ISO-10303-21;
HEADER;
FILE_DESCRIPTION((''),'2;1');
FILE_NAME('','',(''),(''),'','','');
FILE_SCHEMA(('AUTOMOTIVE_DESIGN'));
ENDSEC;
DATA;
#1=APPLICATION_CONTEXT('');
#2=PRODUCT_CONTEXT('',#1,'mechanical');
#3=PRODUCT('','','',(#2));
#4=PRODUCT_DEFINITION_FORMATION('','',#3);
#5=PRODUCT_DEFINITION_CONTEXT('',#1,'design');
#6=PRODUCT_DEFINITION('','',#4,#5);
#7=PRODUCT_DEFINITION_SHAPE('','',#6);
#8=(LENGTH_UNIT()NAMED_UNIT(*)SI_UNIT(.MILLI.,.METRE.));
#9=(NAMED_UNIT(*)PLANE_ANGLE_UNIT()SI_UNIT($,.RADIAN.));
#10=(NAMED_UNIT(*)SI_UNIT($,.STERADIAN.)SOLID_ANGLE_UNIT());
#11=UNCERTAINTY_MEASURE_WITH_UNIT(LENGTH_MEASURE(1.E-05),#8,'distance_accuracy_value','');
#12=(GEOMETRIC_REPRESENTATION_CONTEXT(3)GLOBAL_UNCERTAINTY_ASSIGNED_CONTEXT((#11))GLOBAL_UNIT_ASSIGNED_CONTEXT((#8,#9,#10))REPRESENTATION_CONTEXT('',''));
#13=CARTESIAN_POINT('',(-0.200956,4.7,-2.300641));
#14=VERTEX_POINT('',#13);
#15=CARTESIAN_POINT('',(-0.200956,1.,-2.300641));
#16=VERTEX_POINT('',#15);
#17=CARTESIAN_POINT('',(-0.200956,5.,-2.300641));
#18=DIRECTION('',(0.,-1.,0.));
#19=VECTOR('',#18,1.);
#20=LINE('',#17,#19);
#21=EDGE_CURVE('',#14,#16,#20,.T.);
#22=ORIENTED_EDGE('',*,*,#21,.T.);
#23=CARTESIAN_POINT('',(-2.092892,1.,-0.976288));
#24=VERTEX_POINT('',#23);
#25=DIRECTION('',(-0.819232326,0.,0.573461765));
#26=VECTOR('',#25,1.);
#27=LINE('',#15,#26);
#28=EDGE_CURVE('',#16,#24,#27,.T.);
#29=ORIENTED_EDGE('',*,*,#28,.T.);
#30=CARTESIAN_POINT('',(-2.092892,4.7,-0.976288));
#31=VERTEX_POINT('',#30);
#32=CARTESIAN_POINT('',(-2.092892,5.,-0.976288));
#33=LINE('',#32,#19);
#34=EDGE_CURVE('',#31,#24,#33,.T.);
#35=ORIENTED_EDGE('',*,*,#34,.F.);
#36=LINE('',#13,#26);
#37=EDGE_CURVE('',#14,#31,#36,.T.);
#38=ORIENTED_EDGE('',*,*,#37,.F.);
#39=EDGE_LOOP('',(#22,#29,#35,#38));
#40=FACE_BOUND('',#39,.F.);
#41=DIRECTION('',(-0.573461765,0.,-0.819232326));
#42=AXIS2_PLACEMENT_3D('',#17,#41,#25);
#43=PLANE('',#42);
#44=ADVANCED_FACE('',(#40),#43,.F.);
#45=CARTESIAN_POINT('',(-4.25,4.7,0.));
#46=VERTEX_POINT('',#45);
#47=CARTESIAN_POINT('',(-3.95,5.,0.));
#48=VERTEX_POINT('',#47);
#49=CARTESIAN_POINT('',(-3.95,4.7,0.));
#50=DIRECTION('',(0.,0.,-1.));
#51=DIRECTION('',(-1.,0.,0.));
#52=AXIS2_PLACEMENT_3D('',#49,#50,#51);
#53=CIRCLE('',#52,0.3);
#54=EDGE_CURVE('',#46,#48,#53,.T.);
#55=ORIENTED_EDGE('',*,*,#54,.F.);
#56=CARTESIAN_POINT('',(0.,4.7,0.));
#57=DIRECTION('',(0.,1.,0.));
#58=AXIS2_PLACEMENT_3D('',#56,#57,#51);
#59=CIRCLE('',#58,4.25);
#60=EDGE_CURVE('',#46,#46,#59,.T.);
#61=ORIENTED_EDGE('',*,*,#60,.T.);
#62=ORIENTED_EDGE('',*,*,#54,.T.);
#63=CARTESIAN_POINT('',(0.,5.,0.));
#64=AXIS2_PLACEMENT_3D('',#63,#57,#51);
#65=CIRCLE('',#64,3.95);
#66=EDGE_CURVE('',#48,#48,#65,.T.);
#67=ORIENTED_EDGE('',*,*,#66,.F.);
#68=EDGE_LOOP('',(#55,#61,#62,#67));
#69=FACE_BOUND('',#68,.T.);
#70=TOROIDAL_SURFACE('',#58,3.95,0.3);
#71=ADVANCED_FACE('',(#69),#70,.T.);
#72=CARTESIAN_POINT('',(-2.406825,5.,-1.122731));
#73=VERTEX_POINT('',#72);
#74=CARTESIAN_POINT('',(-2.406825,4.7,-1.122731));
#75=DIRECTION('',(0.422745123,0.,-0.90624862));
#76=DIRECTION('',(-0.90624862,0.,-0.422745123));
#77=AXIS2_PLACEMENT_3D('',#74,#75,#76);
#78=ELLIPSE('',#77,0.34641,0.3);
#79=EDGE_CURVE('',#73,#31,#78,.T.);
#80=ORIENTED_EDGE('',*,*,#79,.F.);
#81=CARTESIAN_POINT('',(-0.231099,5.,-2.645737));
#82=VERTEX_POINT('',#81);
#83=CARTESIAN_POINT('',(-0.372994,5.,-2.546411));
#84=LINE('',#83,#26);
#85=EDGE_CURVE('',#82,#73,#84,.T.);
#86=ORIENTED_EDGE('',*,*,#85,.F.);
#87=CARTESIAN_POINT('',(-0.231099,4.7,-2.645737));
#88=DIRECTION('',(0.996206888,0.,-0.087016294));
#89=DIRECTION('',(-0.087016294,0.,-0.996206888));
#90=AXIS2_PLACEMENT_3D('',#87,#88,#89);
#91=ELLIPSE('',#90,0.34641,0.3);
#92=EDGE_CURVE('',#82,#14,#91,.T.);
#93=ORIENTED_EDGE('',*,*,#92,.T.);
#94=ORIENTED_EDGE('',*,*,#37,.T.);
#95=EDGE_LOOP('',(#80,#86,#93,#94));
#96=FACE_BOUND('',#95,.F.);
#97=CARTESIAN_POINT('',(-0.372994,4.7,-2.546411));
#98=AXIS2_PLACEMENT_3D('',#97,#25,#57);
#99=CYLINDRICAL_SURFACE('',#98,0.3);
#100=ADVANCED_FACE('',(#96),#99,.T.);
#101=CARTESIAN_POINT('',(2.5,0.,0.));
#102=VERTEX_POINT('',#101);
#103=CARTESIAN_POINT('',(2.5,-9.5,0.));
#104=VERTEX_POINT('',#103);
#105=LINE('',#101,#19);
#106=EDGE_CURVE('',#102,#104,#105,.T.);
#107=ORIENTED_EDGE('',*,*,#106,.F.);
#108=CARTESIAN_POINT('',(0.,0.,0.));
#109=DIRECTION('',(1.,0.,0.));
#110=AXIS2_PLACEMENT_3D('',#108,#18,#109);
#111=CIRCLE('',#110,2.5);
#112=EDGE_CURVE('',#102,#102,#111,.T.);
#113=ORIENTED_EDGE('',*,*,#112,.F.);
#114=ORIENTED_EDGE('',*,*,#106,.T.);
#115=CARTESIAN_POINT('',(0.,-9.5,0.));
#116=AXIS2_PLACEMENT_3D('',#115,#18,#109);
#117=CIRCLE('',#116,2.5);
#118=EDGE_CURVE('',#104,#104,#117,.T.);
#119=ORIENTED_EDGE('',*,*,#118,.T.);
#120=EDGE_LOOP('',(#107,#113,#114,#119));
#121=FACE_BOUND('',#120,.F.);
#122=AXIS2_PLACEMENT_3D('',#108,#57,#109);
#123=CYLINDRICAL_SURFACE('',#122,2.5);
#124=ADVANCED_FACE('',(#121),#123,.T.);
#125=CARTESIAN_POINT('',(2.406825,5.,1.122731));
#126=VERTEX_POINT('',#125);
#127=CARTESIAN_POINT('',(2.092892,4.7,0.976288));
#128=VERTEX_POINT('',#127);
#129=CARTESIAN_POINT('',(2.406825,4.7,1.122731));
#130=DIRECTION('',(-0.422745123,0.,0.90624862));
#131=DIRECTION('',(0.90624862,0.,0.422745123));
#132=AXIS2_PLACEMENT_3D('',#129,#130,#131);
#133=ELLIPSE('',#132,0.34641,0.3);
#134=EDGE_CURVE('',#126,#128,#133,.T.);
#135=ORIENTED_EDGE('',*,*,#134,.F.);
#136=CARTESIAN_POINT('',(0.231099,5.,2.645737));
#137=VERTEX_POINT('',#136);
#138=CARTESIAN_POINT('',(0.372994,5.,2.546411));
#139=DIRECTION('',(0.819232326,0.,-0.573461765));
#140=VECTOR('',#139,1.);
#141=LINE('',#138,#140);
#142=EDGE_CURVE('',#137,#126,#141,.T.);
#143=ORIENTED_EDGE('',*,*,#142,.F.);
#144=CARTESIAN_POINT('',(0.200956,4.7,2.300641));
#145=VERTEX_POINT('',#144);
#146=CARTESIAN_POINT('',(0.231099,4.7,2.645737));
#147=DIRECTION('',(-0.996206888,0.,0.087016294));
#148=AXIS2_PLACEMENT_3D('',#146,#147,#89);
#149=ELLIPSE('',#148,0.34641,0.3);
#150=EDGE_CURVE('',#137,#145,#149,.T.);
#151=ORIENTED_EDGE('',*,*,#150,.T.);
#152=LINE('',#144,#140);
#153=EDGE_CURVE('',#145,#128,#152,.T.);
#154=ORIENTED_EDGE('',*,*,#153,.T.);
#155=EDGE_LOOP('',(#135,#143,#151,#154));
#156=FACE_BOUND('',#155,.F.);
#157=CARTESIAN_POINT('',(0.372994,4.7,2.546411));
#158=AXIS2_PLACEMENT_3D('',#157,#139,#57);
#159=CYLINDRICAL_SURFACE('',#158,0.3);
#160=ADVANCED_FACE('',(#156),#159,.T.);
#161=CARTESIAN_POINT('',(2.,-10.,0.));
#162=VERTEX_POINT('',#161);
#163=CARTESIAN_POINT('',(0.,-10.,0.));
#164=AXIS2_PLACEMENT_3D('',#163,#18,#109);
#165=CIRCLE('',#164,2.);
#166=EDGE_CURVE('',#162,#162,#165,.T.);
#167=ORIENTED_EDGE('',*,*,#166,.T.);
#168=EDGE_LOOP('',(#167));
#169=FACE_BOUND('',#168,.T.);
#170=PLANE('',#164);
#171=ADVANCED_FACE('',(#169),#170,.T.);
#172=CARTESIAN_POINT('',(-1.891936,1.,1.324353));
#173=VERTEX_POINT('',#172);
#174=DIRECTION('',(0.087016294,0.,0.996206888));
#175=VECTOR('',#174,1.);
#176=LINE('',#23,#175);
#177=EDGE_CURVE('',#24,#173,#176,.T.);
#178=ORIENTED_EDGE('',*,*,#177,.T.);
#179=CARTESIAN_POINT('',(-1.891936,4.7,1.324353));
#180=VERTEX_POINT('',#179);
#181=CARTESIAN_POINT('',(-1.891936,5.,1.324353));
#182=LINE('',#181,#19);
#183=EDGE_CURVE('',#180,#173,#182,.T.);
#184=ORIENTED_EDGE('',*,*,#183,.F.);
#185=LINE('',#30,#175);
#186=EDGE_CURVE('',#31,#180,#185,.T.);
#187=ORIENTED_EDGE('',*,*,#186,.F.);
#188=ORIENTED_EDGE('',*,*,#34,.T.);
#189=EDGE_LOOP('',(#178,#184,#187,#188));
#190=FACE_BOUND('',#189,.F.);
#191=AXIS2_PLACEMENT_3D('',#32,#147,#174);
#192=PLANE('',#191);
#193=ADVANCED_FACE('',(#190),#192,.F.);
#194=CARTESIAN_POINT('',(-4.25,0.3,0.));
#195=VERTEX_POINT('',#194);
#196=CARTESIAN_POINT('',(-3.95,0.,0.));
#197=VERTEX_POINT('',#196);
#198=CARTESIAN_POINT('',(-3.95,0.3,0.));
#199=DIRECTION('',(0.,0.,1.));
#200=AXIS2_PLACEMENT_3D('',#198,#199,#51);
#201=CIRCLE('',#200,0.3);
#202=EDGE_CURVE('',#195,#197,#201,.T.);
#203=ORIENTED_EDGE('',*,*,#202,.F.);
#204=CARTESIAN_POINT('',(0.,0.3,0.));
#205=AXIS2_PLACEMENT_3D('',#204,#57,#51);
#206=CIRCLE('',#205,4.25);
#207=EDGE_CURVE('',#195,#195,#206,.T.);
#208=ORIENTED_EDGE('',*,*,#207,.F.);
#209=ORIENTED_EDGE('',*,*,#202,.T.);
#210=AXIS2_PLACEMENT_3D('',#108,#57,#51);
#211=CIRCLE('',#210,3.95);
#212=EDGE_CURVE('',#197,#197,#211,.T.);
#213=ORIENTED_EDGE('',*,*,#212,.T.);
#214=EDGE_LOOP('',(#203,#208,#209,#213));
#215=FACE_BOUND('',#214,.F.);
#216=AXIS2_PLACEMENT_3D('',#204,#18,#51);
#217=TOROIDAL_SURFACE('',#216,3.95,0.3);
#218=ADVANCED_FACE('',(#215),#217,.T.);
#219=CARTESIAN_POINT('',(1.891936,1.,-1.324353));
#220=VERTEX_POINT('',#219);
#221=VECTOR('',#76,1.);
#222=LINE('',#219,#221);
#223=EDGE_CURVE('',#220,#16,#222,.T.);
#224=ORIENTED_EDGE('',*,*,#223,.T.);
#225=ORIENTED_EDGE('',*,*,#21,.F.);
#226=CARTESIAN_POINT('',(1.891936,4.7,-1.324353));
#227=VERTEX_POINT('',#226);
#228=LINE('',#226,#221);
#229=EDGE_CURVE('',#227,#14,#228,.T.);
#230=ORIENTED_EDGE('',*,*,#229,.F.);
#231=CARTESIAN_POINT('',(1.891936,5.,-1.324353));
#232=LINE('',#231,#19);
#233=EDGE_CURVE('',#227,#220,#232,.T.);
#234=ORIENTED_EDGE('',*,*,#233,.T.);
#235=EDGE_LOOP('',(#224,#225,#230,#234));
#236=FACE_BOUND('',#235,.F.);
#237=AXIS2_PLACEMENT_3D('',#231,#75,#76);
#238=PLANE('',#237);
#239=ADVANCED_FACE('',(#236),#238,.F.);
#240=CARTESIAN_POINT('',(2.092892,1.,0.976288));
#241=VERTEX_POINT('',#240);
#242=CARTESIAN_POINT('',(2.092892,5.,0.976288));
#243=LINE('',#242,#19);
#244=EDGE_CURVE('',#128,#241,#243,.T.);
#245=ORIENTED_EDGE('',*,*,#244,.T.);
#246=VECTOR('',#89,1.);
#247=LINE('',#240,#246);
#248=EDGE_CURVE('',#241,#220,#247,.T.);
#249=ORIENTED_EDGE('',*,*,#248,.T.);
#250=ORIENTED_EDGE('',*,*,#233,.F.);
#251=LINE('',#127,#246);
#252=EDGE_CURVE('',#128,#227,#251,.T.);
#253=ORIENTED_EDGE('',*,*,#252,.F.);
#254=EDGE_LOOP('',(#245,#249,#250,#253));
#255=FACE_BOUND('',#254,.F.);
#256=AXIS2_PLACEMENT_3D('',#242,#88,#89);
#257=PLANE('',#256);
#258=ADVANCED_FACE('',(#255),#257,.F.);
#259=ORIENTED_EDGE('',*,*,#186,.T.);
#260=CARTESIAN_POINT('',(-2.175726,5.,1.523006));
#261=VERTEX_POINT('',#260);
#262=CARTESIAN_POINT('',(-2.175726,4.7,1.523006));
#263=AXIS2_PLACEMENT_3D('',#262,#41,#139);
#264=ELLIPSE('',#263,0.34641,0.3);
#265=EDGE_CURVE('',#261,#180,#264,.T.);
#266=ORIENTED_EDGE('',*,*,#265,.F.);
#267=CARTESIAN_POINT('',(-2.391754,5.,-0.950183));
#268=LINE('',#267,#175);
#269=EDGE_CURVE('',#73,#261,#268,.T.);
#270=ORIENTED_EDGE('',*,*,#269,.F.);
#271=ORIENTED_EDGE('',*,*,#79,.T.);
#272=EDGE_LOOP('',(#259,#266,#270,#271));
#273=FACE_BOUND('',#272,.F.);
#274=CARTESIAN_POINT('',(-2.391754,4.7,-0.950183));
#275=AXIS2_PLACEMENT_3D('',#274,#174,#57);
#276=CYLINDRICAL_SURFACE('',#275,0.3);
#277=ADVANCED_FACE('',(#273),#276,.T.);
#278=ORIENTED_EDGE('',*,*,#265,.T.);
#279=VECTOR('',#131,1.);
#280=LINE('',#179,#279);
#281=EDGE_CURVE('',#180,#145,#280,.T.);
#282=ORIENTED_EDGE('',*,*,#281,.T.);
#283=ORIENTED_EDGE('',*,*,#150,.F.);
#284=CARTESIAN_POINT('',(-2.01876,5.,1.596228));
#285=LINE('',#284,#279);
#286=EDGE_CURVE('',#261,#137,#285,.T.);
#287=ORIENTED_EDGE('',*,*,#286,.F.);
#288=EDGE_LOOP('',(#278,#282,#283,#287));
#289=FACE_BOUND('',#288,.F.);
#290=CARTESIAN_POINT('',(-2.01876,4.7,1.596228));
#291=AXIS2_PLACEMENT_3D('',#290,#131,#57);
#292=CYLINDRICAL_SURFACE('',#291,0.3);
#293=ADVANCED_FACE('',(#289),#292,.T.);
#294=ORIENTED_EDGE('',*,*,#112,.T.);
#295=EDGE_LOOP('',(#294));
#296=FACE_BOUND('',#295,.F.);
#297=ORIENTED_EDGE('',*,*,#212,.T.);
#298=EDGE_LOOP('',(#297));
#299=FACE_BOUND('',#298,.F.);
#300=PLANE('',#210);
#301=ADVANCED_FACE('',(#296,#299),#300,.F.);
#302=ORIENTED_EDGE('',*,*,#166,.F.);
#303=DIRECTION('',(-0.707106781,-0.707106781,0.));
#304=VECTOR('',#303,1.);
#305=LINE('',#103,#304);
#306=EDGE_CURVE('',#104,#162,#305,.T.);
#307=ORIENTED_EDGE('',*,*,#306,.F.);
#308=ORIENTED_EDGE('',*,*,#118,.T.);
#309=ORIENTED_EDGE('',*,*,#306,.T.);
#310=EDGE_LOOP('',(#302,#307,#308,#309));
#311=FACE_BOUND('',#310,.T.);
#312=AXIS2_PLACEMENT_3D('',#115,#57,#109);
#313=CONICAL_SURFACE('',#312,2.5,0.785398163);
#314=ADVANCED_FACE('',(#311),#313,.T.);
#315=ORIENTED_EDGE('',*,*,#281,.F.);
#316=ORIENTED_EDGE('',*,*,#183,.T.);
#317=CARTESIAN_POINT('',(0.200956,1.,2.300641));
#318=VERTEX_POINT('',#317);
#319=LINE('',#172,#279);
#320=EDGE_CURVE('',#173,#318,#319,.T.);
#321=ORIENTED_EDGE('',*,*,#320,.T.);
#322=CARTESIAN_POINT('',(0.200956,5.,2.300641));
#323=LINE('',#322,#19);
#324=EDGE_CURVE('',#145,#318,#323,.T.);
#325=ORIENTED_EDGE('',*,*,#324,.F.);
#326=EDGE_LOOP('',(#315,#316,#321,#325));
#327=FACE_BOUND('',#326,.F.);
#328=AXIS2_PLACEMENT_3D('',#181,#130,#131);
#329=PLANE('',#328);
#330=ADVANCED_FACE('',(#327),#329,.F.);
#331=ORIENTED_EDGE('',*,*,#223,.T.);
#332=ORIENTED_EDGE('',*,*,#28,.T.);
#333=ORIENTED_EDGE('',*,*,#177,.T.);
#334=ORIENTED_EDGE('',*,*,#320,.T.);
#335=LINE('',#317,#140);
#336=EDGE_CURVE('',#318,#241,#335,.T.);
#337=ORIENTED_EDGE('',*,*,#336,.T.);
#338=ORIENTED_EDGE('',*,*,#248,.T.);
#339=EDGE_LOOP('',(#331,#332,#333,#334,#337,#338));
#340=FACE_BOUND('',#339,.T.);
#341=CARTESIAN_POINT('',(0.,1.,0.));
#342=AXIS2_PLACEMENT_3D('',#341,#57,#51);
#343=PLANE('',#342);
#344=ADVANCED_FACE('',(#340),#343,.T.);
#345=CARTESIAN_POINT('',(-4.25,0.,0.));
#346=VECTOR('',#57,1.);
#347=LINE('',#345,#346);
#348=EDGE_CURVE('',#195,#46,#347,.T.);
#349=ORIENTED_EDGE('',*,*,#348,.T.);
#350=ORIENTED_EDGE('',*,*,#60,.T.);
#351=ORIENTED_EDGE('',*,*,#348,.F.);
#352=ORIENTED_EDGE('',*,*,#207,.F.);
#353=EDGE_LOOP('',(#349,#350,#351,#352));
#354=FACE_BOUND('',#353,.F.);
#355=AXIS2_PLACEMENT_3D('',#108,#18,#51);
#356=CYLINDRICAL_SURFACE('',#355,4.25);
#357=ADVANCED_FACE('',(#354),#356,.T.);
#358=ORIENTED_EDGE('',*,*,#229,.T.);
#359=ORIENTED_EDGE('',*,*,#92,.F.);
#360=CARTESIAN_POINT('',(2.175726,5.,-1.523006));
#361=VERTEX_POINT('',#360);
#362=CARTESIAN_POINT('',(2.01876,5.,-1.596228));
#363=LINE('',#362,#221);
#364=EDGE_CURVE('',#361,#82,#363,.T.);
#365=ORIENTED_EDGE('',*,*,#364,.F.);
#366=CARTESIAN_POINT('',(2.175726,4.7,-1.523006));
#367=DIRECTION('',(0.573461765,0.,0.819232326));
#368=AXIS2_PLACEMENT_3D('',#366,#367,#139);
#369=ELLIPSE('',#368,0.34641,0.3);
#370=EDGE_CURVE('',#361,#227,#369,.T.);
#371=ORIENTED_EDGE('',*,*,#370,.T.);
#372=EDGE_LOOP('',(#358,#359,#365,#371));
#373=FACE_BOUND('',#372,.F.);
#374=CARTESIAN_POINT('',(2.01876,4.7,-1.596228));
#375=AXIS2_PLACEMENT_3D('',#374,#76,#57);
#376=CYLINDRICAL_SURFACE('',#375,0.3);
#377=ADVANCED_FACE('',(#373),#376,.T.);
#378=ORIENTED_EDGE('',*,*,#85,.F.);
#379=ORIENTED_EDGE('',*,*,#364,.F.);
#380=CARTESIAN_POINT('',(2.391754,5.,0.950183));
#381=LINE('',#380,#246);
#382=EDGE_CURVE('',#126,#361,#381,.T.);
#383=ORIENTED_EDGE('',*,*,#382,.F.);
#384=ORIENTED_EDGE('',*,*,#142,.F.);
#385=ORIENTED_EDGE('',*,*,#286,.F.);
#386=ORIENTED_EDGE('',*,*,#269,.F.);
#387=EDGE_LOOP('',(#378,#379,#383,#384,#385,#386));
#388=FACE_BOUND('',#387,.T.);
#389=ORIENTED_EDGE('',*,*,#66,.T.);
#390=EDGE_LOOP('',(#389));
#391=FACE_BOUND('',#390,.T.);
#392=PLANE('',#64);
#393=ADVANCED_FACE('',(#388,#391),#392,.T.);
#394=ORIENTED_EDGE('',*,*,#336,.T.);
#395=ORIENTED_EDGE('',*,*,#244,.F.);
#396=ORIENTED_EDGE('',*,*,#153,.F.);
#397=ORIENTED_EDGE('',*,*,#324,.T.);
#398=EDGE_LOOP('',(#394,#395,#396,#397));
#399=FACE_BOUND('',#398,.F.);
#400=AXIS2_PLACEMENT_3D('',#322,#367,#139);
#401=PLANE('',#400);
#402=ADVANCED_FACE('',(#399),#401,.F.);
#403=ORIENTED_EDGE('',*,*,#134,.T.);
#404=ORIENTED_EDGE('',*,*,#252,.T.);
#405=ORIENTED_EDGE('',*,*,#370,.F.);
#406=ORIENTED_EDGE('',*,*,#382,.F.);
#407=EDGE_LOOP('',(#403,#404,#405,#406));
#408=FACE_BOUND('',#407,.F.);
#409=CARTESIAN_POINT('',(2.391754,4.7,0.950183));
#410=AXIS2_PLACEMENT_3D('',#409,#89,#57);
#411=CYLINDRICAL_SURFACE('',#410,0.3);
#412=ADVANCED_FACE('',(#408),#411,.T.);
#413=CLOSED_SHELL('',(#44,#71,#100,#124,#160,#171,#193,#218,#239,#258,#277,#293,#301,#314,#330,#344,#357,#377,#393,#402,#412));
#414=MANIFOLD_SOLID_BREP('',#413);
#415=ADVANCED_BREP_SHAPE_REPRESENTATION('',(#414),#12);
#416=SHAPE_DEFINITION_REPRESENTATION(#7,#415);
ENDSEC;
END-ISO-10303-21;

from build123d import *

# Parameters (mm, degrees)
F0_R     = 2.5
F1_DEPTH = 10
F2_SIZE  = 0.5
F3_R     = 4.25
F3_R_2   = 2.5
F4_DEPTH = 5
F6_DEPTH = 4
F7_R     = 0.3


with BuildPart() as f1:
    # F0 (on Front) → F1 (new body)
    with BuildSketch(Plane.XZ):
        Circle(F0_R)
    extrude(amount=F1_DEPTH)

    # F2
    f2_edges = [f1.edges().sort_by_distance(p)[0] for p in [
        (-2.5, -10, 0),
    ]]
    chamfer(f2_edges, length=F2_SIZE)

    # F3 (on face) → F4 (join)
    with BuildSketch(Plane(origin=(0, 0, 0), x_dir=(-1, 0, 0), z_dir=(0, 1, 0))):
        Circle(F3_R)
        Circle(F3_R_2, mode=Mode.SUBTRACT)
        Circle(F3_R_2)
    extrude(amount=F4_DEPTH)

    # F5 (on face) → F6 (cut)
    with BuildSketch(Plane(origin=(0, 5, 0), x_dir=(-1, 0, 0), z_dir=(0, 1, 0))):
        Polygon((-0.2009555222, 2.3006412609), (-2.092891538, 0.9762880432), (-1.8919360159, -1.3243532177), (0.2009555222, -2.3006412609), (2.092891538, -0.9762880432), (1.8919360159, 1.3243532177), align=None)
    extrude(amount=-F6_DEPTH, mode=Mode.SUBTRACT)

    # F7
    f7_edges = [f1.edges().sort_by_distance(p)[0] for p in [
        (4.25, 5, 0),
        (4.25, 0, 0),
        (1.146924, 5, 1.638465),
        (-0.84549, 5, 1.812497),
        (1.992414, 5, -0.174033),
        (0.84549, 5, -1.812497),
        (-1.146924, 5, -1.638465),
        (-1.992414, 5, 0.174033),
    ]]
    fillet(f7_edges, radius=F7_R)


solid = f1.part
